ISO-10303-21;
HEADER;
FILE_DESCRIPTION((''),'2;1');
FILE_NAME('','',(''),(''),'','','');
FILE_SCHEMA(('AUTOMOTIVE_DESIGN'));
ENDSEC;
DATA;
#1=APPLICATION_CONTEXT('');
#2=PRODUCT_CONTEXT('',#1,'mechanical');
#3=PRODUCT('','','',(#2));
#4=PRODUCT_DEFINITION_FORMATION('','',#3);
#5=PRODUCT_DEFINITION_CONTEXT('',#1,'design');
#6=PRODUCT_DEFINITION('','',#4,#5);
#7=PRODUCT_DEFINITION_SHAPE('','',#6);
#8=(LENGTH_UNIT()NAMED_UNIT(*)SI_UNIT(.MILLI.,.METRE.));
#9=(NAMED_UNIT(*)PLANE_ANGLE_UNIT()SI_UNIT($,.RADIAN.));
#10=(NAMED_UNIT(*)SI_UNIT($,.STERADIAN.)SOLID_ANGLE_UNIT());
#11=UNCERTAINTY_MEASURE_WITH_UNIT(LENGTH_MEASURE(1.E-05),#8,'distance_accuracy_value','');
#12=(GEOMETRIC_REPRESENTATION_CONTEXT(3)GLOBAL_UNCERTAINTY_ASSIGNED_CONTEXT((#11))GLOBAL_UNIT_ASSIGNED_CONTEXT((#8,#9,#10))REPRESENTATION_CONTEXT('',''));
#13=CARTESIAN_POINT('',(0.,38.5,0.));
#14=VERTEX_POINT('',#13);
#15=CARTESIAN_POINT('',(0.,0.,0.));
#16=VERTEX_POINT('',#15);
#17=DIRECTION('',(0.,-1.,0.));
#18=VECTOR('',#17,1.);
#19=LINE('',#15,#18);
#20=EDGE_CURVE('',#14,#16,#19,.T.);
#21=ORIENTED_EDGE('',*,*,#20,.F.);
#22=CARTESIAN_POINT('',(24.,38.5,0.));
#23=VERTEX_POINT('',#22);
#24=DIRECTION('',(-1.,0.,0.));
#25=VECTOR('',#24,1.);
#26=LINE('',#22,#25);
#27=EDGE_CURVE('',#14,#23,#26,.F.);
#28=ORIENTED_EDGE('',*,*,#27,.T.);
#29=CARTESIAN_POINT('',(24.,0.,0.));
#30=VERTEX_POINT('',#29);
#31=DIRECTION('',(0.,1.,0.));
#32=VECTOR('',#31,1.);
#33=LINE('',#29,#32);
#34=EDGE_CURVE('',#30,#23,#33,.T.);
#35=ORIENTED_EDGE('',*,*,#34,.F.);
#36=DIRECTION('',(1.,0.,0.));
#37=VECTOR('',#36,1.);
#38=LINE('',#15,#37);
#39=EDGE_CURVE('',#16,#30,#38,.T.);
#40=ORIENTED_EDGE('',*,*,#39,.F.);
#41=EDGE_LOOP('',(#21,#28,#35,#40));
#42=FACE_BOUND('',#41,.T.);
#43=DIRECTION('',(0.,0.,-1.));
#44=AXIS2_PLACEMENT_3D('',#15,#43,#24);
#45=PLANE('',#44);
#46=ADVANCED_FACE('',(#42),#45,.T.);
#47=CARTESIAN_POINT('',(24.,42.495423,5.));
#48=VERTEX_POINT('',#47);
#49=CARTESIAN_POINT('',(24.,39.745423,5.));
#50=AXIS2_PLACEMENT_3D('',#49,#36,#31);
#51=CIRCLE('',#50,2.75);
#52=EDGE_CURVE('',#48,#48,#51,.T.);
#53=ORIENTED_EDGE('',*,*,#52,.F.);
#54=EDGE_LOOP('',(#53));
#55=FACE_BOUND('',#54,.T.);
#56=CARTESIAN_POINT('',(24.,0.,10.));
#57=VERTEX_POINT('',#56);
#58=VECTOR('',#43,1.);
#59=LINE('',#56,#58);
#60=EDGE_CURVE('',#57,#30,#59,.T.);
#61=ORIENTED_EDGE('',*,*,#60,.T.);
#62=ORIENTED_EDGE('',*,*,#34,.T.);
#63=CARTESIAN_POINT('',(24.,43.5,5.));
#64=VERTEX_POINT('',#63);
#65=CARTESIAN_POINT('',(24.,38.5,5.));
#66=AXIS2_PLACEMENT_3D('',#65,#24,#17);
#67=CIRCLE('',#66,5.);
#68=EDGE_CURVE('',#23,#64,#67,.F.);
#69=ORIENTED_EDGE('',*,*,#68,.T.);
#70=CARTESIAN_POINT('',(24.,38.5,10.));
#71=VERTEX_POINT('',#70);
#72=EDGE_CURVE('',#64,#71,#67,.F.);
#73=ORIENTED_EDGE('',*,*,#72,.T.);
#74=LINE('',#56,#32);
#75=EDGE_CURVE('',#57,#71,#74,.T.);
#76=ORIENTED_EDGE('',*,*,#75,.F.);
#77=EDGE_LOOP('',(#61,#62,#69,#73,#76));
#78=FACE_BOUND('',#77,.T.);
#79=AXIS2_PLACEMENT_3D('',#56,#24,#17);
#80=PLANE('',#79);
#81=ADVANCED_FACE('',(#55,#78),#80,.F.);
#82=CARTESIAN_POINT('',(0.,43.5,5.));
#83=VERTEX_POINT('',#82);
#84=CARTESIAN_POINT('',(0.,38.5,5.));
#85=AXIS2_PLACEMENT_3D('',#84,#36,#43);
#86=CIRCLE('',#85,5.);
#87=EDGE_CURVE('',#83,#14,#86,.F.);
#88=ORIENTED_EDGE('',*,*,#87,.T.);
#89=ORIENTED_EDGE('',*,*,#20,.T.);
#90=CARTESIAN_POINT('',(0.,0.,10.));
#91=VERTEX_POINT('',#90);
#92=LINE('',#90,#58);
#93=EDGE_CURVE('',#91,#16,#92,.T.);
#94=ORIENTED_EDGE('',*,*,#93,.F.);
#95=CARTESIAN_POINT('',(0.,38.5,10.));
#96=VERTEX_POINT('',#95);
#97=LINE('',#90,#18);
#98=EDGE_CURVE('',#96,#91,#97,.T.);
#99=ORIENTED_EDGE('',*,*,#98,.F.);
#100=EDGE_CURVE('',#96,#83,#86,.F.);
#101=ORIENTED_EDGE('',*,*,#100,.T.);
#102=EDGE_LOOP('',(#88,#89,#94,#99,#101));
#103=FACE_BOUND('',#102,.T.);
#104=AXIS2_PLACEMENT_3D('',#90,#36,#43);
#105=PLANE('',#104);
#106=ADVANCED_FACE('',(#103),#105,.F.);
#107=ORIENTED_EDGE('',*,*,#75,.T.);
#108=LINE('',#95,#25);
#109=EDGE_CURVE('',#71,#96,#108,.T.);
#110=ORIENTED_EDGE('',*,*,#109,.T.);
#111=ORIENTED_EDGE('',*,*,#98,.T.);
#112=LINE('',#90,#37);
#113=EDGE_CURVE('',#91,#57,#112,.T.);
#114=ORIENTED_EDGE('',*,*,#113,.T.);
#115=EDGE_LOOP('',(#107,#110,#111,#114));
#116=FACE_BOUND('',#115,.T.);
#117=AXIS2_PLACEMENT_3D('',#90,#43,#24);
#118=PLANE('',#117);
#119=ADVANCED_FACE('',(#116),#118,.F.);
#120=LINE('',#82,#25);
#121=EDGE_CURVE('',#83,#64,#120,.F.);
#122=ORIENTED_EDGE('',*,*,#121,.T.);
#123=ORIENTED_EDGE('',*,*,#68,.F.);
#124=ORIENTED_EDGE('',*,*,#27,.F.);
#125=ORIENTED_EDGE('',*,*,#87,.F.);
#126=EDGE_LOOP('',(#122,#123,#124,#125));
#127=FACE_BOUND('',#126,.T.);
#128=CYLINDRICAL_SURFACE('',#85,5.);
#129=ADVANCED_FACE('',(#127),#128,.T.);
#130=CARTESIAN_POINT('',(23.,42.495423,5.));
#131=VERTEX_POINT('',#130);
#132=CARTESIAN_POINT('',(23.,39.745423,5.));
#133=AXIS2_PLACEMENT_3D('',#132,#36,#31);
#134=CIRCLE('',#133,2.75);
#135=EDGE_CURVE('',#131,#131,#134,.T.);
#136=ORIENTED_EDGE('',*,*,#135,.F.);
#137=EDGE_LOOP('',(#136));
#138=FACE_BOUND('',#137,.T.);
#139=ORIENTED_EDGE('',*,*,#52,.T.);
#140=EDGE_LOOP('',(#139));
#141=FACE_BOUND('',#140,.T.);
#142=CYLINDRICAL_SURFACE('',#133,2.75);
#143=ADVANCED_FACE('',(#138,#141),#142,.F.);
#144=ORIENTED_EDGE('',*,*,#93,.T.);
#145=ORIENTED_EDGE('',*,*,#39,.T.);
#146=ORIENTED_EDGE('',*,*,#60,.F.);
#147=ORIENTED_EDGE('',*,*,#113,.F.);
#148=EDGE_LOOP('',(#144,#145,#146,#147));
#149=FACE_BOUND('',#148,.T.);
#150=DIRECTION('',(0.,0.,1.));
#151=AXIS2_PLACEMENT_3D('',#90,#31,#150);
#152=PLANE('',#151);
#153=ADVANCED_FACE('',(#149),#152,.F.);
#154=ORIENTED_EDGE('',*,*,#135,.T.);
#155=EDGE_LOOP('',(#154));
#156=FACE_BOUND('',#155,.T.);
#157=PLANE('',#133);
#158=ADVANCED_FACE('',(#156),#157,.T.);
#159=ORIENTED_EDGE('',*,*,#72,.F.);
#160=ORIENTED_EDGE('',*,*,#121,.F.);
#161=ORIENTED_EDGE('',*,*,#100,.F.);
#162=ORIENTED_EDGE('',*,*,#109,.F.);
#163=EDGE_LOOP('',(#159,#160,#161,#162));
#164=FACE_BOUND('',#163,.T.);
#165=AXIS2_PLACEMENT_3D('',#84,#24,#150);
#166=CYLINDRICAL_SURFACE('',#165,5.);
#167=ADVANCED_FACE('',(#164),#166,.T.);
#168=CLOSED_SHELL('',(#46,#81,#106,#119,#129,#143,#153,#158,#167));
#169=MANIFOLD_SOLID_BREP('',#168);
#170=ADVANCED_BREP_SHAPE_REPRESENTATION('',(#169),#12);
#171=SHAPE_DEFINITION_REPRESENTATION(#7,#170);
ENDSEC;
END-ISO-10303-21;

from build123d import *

# Parameters (mm, degrees)
SKETCH1_W           = 24
SKETCH1_H           = 43.5
BOSS_EXTRUDE1_DEPTH = 10
FILLET1_R           = 5
SKETCH2_R           = 2.75
CUT_EXTRUDE1_DEPTH  = 1


with BuildPart() as part:
    # Sketch1 → Boss-Extrude1 (new body)
    with BuildSketch(Plane.XY):
        with Locations((12, 21.75)):
            Rectangle(SKETCH1_W, SKETCH1_H)
    extrude(amount=BOSS_EXTRUDE1_DEPTH)

    # Fillet1
    fillet1_edges = [part.edges().sort_by_distance(p)[0] for p in [
        (12, 43.5, 0),
        (12, 43.5, 10),
    ]]
    fillet(fillet1_edges, radius=FILLET1_R - 0.0001)  # a hair under: the kernel refuses the full size

    # Sketch2 → Cut-Extrude1 (cut)
    with BuildSketch(Plane(origin=(24, 0, 0), x_dir=(0, 0, -1), z_dir=(1, 0, 0))):
        with Locations(Location((-5, 39.745423447, 0), (0, 0, 90))):
            Circle(SKETCH2_R)
    extrude(amount=-CUT_EXTRUDE1_DEPTH, mode=Mode.SUBTRACT)


solid = part.part
